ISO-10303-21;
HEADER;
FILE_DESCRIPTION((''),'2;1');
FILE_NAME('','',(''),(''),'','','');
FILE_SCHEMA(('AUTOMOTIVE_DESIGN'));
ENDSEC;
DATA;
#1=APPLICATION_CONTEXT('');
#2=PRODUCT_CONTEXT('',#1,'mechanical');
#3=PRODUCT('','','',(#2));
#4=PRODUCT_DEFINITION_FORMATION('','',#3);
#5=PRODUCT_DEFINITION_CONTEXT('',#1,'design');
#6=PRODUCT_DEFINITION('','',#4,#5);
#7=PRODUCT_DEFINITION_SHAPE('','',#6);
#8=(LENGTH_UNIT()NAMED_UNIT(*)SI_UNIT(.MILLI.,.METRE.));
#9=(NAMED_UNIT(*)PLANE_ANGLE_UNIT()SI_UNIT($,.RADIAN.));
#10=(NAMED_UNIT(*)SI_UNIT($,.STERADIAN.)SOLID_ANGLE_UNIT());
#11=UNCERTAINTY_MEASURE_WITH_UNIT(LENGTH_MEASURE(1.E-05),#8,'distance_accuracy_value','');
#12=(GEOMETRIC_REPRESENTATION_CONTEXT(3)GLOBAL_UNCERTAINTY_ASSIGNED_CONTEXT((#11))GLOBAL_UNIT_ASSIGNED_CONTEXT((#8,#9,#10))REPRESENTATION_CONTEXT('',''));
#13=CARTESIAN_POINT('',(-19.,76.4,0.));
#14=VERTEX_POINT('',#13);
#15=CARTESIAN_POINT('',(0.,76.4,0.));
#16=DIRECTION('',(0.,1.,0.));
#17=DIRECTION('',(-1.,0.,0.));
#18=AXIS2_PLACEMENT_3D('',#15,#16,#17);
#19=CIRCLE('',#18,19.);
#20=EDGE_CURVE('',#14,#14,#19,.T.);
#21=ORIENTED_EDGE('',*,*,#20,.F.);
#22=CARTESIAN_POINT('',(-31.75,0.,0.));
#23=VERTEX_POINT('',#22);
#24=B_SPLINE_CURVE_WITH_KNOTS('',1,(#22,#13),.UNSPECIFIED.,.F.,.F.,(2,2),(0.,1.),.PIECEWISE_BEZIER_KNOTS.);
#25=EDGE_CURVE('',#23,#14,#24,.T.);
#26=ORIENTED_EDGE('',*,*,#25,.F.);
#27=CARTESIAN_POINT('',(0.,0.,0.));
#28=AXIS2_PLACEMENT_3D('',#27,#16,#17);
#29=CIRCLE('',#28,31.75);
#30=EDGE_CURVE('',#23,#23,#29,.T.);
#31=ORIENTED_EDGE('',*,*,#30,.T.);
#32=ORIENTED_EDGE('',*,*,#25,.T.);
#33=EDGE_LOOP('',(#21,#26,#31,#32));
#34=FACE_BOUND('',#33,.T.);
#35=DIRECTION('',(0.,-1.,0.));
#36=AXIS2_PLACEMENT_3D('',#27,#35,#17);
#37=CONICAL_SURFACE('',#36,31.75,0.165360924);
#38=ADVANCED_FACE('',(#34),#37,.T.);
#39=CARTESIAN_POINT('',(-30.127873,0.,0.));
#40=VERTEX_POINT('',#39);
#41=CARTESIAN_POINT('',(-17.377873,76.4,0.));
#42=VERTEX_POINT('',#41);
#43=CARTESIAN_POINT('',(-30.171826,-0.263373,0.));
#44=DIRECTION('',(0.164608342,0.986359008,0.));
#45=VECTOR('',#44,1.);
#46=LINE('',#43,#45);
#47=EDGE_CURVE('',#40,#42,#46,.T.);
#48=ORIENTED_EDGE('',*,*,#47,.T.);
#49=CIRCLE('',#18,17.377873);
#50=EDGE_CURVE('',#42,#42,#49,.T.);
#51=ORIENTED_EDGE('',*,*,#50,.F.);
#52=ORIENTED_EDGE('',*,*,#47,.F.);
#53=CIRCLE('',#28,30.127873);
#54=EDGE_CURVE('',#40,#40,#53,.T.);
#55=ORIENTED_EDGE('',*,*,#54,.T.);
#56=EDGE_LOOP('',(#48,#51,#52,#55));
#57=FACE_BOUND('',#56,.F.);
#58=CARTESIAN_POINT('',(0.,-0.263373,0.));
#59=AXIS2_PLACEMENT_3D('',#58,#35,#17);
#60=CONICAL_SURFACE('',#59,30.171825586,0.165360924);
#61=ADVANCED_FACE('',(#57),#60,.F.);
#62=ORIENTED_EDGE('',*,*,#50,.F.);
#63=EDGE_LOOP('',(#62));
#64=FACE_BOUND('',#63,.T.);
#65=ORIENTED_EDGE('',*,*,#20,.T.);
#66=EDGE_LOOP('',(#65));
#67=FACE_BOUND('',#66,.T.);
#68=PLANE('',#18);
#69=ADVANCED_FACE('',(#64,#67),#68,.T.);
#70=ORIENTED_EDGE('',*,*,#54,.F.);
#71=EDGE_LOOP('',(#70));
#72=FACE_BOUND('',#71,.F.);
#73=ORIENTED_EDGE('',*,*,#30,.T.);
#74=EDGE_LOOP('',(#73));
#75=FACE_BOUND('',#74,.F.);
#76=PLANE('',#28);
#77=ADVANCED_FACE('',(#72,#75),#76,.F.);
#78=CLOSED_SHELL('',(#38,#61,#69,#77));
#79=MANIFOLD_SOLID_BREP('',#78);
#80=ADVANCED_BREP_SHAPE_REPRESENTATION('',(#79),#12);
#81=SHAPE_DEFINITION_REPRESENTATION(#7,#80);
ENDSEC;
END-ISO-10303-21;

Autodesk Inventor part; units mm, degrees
ref_plane "YZ Plane" through (0, 0, 0) normal (1, 0, 0) x (0, 1, 0)
ref_plane "XY Plane" through (0, 0, 0) normal (0, 0, 1) x (1, 0, 0)
sketch "Szkic6" plane through (0, 0, 0) normal (0, 1, 0) x (-1, 0, 0)
  circle A0 centre (0, 0) radius 31.75
  dimension "d33" = 63.5
ref_plane "Płaszczyzna konstrukcyjna1" through (0, 76.4, 0) normal (0, 1, 0) x (-1, 0, 0)
sketch "Szkic7" plane through (0, 76.4, 0) normal (0, 1, 0) x (-1, 0, 0)
  circle A0 centre (0, 0) radius 19
  dimension "d35" = 38
loft "Wyciągnięcie złożone1" add profiles "Szkic6", "Szkic7"
shell "Skorupa1" thickness 1.6 removed faces 2 at (-4.7406, 76.4, -4.1998) at (14.3997, 0, 5.5289)
equation "\"d33\" = OD1"
equation "\"d35\" = OD2"
equation "\"d52\" = THK"
equation "\"SzerokośćGięciaPodcięcia\" = Grubość"
equation "\"RozmiarPodcięciaNarożnika\" = 4 * Grubość"
equation "\"PromieńPrzejścia\" = PromieńGięcia"
equation "\"Rozmiar_promienia_Jacobiego\" = PromieńGięcia"
equation "\"Wielk_odstępu\" = Grubość"
equation "\"d2\" = PromieńGięcia"
equation "\"d23\" = PromieńGięcia"
equation "\"OD1\" = 63.5"
equation "\"OD2\" = 38"
equation "\"L\" = 76.4"
equation "\"THK\" = 1.6"
equation "\"d34\" = L"
equation "\"Grubość\" = 1.5"
equation "\"PromieńGięcia\" = 3"
properties part number "Redukcja symetryczna Ø63,5x38x1,6 L=76,4" material "304"
